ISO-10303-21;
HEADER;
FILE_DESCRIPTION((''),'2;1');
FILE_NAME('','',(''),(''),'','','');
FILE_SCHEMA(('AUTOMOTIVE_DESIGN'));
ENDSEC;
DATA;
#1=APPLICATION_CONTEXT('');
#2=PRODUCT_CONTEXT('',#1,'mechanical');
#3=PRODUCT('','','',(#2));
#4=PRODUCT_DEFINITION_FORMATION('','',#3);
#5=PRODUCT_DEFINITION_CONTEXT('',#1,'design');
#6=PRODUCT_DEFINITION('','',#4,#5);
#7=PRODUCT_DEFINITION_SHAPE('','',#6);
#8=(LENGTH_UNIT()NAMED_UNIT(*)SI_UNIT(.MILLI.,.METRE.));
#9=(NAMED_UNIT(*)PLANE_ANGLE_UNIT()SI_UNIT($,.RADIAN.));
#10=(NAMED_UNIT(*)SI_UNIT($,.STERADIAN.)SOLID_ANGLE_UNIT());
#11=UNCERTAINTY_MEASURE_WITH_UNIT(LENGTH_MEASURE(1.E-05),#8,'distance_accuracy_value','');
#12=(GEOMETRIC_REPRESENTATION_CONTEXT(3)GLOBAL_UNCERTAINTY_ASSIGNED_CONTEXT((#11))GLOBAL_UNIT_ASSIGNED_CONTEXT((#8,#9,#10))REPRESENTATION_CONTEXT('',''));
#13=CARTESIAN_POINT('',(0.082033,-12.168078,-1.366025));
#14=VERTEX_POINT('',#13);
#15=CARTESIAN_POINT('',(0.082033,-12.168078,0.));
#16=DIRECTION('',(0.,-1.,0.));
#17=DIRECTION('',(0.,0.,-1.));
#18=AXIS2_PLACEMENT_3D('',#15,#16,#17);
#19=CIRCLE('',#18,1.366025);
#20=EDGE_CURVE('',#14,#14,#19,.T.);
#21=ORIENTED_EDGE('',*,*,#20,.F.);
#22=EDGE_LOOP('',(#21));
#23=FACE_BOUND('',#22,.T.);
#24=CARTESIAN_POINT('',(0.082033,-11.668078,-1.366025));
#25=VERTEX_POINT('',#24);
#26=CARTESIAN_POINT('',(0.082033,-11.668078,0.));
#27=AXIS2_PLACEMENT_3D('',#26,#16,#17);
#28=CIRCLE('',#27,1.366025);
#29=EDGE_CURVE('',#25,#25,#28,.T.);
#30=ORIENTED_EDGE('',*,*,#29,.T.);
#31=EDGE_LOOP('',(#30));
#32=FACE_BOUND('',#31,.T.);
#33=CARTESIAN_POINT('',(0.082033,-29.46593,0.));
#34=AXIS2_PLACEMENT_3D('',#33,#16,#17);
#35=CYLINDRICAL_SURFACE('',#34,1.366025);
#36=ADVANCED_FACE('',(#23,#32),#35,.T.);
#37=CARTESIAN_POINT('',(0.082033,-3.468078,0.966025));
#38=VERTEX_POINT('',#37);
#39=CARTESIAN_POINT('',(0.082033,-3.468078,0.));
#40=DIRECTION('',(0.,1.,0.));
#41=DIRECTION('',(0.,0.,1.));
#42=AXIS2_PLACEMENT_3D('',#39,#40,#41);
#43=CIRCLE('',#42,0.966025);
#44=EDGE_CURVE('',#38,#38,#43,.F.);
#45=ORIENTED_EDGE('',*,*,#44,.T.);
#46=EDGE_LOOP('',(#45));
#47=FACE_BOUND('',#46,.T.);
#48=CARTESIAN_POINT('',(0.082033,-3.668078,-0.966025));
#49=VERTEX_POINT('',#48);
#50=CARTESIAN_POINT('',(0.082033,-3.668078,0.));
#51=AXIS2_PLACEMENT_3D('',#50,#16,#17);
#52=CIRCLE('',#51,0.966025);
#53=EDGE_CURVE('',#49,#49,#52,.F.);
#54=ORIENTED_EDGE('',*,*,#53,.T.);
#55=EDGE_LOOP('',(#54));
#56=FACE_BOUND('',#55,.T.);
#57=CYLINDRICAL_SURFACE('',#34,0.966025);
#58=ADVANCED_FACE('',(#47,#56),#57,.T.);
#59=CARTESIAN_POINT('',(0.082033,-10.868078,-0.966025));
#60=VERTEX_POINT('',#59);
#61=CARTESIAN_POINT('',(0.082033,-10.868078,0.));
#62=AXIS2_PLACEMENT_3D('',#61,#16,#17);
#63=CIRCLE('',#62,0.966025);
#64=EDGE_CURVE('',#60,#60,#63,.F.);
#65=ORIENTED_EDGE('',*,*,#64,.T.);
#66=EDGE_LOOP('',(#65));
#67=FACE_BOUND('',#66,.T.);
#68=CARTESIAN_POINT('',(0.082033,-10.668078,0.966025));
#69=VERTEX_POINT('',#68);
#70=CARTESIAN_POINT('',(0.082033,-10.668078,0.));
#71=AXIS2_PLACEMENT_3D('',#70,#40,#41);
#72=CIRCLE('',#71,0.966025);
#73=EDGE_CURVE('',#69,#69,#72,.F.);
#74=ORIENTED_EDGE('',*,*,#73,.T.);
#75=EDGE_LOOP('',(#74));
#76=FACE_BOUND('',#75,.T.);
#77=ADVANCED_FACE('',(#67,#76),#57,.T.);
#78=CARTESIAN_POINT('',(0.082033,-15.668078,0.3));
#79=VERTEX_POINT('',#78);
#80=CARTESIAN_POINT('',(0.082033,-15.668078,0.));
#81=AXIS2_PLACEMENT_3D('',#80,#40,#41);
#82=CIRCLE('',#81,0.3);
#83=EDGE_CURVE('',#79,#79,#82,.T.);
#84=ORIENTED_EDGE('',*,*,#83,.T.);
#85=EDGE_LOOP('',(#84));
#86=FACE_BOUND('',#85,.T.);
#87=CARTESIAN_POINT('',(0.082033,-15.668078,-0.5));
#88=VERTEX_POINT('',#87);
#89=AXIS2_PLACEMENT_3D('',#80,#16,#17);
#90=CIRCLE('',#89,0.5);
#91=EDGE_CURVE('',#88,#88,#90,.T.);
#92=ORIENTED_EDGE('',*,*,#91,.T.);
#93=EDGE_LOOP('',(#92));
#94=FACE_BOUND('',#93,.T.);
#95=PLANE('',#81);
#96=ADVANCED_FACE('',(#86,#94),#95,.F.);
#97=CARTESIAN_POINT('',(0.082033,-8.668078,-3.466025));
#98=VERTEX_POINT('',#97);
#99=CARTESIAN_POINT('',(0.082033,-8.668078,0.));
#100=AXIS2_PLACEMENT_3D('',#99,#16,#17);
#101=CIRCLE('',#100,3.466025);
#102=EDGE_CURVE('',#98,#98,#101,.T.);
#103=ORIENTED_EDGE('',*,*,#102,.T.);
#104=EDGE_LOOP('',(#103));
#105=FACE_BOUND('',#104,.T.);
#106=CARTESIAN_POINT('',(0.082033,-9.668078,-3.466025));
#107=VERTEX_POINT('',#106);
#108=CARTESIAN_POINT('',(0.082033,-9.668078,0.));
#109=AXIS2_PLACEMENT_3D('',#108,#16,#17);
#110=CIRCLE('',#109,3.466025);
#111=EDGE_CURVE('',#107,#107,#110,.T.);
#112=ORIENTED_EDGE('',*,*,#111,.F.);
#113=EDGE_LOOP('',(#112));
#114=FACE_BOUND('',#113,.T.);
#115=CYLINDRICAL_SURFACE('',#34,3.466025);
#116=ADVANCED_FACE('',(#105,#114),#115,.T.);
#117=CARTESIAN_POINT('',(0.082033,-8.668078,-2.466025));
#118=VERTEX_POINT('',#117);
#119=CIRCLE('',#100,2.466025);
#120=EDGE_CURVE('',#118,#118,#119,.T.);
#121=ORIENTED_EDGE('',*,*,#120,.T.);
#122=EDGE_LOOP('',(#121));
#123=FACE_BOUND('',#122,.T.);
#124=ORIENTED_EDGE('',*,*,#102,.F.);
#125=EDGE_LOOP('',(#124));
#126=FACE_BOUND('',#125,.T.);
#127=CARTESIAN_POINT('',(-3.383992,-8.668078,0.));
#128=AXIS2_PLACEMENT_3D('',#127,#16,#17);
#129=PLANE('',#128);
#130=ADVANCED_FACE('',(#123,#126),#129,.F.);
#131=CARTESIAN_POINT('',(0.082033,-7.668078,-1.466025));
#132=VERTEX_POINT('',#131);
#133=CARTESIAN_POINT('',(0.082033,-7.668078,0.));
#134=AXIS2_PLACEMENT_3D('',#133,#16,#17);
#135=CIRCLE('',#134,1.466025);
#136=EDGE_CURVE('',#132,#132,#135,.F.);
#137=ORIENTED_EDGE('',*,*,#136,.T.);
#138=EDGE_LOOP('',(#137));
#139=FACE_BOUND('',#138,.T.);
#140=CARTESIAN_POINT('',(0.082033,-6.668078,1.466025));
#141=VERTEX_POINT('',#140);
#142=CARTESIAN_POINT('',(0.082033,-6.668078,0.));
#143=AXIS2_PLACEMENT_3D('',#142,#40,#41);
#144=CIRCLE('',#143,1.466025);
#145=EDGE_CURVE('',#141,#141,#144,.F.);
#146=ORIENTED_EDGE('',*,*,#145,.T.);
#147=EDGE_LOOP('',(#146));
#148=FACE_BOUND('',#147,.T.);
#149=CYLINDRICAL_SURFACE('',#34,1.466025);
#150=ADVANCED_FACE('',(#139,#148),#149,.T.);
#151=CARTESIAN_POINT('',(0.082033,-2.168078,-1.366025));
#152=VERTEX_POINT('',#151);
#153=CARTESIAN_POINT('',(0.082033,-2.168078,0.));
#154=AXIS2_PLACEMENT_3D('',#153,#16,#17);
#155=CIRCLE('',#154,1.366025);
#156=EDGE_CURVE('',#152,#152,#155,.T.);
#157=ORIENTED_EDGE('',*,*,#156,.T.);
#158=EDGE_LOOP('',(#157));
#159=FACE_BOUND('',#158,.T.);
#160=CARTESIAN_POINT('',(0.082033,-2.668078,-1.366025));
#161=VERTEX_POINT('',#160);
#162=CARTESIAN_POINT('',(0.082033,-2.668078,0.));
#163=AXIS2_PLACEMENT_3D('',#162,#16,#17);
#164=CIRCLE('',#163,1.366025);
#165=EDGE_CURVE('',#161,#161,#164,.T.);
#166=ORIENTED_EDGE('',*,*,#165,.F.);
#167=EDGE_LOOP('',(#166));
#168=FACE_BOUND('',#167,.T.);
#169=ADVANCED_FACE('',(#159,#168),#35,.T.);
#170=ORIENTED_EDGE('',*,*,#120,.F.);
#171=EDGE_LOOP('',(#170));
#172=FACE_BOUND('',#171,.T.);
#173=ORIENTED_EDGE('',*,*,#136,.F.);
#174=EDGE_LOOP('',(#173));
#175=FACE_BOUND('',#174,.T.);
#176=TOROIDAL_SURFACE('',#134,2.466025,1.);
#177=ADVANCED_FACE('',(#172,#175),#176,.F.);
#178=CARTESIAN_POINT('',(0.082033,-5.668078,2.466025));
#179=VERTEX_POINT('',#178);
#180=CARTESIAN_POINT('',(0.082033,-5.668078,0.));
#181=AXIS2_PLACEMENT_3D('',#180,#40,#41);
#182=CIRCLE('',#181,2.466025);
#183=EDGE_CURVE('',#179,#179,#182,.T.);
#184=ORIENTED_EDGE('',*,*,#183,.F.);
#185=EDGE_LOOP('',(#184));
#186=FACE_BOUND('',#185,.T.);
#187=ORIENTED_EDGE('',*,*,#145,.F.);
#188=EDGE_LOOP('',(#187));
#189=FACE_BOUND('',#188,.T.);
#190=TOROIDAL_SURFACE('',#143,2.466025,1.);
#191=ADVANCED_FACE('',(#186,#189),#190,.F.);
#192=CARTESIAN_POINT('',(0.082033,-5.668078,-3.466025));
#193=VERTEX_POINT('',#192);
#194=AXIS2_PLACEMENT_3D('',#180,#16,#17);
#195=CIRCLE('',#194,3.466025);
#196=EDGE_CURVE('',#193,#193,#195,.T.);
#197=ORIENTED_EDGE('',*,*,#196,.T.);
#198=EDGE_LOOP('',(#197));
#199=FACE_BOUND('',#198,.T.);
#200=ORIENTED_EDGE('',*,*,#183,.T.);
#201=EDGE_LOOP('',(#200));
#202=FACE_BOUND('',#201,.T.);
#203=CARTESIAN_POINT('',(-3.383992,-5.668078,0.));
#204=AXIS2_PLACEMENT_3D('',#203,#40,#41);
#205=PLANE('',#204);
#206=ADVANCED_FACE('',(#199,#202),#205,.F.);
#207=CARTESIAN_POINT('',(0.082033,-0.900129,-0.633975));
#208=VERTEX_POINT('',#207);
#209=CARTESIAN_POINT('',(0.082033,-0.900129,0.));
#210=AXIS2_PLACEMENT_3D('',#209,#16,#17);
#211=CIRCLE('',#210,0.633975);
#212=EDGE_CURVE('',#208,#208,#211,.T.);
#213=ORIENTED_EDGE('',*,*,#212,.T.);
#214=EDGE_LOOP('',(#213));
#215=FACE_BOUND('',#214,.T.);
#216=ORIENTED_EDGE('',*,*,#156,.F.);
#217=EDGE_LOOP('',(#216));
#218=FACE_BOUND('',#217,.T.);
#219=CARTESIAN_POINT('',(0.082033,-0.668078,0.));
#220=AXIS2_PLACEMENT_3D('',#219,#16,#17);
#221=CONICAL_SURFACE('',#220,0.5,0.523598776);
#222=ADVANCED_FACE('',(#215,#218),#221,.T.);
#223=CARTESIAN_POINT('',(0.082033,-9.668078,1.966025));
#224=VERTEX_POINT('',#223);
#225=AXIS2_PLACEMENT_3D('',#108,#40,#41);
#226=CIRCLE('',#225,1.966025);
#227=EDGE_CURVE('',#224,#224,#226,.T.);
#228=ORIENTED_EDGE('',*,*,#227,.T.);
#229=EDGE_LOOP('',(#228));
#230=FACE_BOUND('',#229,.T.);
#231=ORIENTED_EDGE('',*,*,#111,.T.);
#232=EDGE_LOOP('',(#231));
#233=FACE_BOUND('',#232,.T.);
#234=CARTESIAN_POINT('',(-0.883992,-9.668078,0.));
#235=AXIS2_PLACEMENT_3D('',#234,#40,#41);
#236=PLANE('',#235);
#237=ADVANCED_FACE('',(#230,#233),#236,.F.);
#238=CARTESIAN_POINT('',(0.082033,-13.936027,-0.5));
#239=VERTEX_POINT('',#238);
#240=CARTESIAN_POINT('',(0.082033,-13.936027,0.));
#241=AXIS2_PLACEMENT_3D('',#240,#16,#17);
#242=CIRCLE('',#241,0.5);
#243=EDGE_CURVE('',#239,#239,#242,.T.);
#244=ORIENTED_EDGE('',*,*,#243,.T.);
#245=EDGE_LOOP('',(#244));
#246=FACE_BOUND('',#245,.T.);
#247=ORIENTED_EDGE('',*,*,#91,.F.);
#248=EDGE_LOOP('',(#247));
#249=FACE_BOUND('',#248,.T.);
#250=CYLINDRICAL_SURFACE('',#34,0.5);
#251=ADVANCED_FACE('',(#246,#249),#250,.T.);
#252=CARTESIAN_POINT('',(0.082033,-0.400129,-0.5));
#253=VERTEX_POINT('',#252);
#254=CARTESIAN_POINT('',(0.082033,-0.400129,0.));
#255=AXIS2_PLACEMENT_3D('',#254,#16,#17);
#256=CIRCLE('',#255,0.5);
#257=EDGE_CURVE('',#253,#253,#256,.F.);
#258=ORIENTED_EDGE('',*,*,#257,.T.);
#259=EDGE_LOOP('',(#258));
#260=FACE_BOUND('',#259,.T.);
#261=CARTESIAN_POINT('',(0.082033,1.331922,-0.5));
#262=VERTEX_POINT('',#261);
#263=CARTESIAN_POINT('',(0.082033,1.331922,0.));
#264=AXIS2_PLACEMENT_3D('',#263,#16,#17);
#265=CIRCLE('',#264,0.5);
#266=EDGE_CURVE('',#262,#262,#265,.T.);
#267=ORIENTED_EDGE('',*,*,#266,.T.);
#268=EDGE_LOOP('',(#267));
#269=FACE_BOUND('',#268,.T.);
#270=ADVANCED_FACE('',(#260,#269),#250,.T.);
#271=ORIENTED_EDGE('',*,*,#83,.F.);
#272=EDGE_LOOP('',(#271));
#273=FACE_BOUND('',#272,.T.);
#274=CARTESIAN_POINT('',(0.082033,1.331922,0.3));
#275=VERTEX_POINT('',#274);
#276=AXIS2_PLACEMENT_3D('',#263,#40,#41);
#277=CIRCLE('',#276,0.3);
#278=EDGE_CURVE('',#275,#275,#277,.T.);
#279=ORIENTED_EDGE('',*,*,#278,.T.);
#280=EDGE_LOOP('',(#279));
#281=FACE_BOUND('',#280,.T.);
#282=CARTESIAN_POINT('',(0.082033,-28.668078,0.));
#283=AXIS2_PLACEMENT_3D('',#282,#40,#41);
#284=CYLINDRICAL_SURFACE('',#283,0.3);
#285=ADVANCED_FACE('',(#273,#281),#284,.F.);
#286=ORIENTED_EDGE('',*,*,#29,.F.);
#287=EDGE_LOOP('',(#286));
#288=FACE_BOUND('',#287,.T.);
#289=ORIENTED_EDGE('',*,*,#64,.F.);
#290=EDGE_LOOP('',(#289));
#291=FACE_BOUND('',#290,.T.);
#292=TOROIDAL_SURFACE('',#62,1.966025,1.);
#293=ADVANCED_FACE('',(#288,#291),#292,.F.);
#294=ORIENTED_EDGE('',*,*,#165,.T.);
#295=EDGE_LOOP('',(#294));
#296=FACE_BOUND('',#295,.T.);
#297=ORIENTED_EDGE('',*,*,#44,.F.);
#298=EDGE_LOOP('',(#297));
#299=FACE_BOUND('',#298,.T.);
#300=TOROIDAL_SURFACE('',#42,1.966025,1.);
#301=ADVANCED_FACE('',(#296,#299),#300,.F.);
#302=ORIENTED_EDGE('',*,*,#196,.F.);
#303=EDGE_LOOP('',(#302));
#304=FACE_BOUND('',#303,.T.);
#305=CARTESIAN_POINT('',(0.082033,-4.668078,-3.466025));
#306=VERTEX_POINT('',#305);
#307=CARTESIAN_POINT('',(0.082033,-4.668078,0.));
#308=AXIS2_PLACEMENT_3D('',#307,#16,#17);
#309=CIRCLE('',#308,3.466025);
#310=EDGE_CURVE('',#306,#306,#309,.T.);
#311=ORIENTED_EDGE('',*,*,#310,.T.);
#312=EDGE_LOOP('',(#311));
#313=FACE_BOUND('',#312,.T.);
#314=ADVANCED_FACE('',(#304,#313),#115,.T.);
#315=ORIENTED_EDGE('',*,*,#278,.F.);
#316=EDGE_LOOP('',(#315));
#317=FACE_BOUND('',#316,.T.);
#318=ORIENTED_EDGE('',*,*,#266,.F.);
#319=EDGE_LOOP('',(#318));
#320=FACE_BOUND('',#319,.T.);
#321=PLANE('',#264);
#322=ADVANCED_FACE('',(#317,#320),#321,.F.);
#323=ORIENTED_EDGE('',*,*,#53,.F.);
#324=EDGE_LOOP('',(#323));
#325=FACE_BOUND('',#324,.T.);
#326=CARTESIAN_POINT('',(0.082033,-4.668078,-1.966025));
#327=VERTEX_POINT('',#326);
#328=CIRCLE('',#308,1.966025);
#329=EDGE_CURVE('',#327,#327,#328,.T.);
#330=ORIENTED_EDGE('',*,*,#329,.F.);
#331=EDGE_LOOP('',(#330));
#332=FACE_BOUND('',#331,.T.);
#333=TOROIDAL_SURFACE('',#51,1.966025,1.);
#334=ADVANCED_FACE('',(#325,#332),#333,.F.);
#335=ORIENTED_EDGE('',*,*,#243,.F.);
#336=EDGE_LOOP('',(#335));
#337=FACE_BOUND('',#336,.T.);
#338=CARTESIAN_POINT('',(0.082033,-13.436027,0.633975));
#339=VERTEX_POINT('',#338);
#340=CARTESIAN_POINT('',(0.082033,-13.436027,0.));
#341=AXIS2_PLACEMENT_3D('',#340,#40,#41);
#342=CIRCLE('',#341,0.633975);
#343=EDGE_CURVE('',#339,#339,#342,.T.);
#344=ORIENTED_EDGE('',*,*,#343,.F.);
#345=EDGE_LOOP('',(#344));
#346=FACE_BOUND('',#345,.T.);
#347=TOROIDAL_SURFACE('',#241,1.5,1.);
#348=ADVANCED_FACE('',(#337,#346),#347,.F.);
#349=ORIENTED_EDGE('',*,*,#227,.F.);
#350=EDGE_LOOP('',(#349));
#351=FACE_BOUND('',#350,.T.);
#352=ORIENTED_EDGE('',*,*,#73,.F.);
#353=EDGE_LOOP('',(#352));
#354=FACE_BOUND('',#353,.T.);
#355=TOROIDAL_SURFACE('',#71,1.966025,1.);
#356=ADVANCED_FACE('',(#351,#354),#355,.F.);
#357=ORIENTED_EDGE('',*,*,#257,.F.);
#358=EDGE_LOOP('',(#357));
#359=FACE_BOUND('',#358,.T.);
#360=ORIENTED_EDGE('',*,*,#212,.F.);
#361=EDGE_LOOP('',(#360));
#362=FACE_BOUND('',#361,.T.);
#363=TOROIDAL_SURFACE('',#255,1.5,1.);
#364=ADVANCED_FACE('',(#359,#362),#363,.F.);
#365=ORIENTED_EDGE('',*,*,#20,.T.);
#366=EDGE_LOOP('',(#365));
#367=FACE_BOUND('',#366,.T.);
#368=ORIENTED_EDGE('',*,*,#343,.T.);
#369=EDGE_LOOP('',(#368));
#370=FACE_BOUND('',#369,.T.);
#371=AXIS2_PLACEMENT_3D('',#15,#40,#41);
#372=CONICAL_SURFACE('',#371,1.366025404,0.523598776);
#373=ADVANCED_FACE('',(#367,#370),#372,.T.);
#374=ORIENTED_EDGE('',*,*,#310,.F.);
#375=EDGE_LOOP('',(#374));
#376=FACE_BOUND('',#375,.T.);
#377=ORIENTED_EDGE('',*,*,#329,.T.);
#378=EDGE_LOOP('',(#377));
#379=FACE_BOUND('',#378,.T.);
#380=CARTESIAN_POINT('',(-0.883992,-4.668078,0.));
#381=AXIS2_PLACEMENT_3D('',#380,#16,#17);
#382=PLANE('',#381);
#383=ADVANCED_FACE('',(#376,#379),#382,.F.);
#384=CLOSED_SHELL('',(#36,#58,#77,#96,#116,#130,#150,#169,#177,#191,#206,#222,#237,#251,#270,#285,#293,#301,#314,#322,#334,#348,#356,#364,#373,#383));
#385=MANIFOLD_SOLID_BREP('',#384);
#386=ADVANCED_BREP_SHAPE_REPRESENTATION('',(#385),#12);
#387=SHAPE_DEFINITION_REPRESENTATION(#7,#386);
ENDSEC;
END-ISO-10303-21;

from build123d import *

# Parameters (mm, degrees)
REDONDEO1_R           = 1
CROQUIS2_R            = 0.3
CORTAR_EXTRUIR1_DEPTH = 30


with BuildPart() as part:
    # Croquis1 → Revolución1 (revolve)
    with BuildSketch(Plane.XY, mode=Mode.PRIVATE) as revoluci_n1_sk:
        Polygon((0.0820331634814839, 1.3319217282682125), (-0.4179668365185161, 1.3319217282682125), (-0.41796683651851585, -0.6680782717317876), (-1.2839922403029567, -2.1680782717317877), (-1.2839922403029567, -2.6680782717317877), (-0.8839922403029566, -2.6680782717317877), (-0.8839922403029565, -4.668078271731787), (-3.3839922403029563, -4.668078271731787), (-3.3839922403029568, -5.668078271731787), (-1.383992240302957, -5.668078271731787), (-1.383992240302957, -8.668078271731785), (-3.3839922403029568, -8.668078271731785), (-3.3839922403029563, -9.668078271731787), (-0.8839922403029565, -9.668078271731785), (-0.8839922403029566, -11.668078271731785), (-1.2839922403029567, -11.668078271731785), (-1.2839922403029567, -12.168078271731785), (-0.41796683651851585, -13.668078271731785), (-0.4179668365185161, -15.668078271731785), (0.0820331634814839, -15.668078271731785), align=None)
    revolve(revoluci_n1_sk.sketch.rotate(Axis((0.08203316348148769, -29.465929864768743, 0), (0, 1, 0)), 270), axis=Axis((0.08203316348148769, -29.465929864768743, 0), (0, 1, 0)))

    # Redondeo1
    # the kernel refuses this fillet: 1 mm, written as the material it adds along each edge
    with BuildSketch(Plane(origin=(0.08203316348148769, -9.668078271731783, 0), x_dir=(2.2e-16, 0, -1), z_dir=(1, 0, 2.2e-16))) as redondeo1_piece_1:
        with BuildLine():
            CenterArc((0.9660254037844442 + REDONDEO1_R, -REDONDEO1_R), REDONDEO1_R, 90, 89.9999999999998)
            Line((0.9660254037844442, -REDONDEO1_R), (0.9660254037844442 - REDONDEO1_R * 0.02, -REDONDEO1_R))
            Line((0.9660254037844442 - REDONDEO1_R * 0.02, -REDONDEO1_R), (0.9660254037844442 - REDONDEO1_R * 0.02, REDONDEO1_R * 0.02))
            Line((0.9660254037844442 - REDONDEO1_R * 0.02, REDONDEO1_R * 0.02), (0.9660254037844442 + REDONDEO1_R, REDONDEO1_R * 0.02))
            Line((0.9660254037844442 + REDONDEO1_R, REDONDEO1_R * 0.02), (0.9660254037844442 + REDONDEO1_R, -3.55e-15))
        make_face()
    revolve(axis=Axis((0.08203316348148769, -9.668078271731783, 0), (0, 1, 0)))
    with BuildSketch(Plane(origin=(0.08203316348148769, -11.668078271731783, 0), x_dir=(2.2e-16, 0, -1), z_dir=(1, 0, 2.2e-16))) as redondeo1_piece_2:
        with BuildLine():
            CenterArc((1.9660254037844442, 0.7999999999999989), REDONDEO1_R, 180, 53.130102354155895)
            Line((1.3660254037844437, 0), (1.3540254037844437, -0.01600000000000001))
            ThreePointArc((1.3540254037844437, -0.01600000000000001), (1.166025403784444, -0.01999999999999957), (0.9660254037844443, -0.01999999999999957))
            Line((0.9660254037844443, -0.01999999999999957), (0.9460254037844443, 0))
            Line((0.9460254037844443, 0), (0.9460254037844442, 0.7999999999999989))
            Line((0.9460254037844442, 0.7999999999999989), (0.9660254037844442, 0.7999999999999989))
        make_face()
    revolve(axis=Axis((0.08203316348148769, -11.668078271731783, 0), (0, 1, 0)))
    with BuildSketch(Plane(origin=(0.08203316348148769, -13.668078271731785, 0), x_dir=(2.2e-16, 0, -1), z_dir=(1, 0, 2.2e-16))) as redondeo1_piece_3:
        with BuildLine():
            CenterArc((0.5000000000000036 + REDONDEO1_R, -REDONDEO1_R * 0.267949192431), REDONDEO1_R, 149.99999999999991, 29.99999999999997)
            Line((0.5000000000000024, -REDONDEO1_R * 0.267949192431), (0.5000000000000036 - REDONDEO1_R * 0.02, -REDONDEO1_R * 0.267949192431))
            Line((0.5000000000000036 - REDONDEO1_R * 0.02, -REDONDEO1_R * 0.267949192431), (0.5000000000000036 - REDONDEO1_R * 0.02, REDONDEO1_R * 0.00535898384862))
            Line((0.5000000000000036 - REDONDEO1_R * 0.02, REDONDEO1_R * 0.00535898384862), (0.5000000000000036 + REDONDEO1_R * 0.11665408814, REDONDEO1_R * 0.242050807569))
            Line((0.5000000000000036 + REDONDEO1_R * 0.11665408814, REDONDEO1_R * 0.242050807569), (0.5000000000000036 + REDONDEO1_R * 0.133974596216, REDONDEO1_R * 0.232050807569))
        make_face()
    revolve(axis=Axis((0.08203316348148769, -13.668078271731785, 0), (0, 1, 0)))
    with BuildSketch(Plane(origin=(0.08203316348148769, -0.6680782717317868, 0), x_dir=(2.2e-16, 0, -1), z_dir=(1, 0, 2.2e-16))) as redondeo1_piece_4:
        with BuildLine():
            CenterArc((0.5000000000000036 + REDONDEO1_R, REDONDEO1_R * 0.267949192431), REDONDEO1_R, 180, 30.000000000000057)
            Line((0.5000000000000036 + REDONDEO1_R * 0.133974596216, -REDONDEO1_R * 0.232050807569), (0.5000000000000036 + REDONDEO1_R * 0.11665408814, -REDONDEO1_R * 0.242050807569))
            Line((0.5000000000000036 + REDONDEO1_R * 0.11665408814, -REDONDEO1_R * 0.242050807569), (0.5000000000000036 - REDONDEO1_R * 0.02, -REDONDEO1_R * 0.00535898384862))
            Line((0.5000000000000036 - REDONDEO1_R * 0.02, -REDONDEO1_R * 0.00535898384862), (0.5000000000000036 - REDONDEO1_R * 0.02, REDONDEO1_R * 0.267949192431))
            Line((0.5000000000000036 - REDONDEO1_R * 0.02, REDONDEO1_R * 0.267949192431), (0.5000000000000038, REDONDEO1_R * 0.267949192431))
        make_face()
    revolve(axis=Axis((0.08203316348148769, -0.6680782717317868, 0), (0, 1, 0)))
    with BuildSketch(Plane(origin=(0.08203316348148769, -2.668078271731787, 0), x_dir=(2.2e-16, 0, -1), z_dir=(1, 0, 2.2e-16))) as redondeo1_piece_5:
        with BuildLine():
            CenterArc((1.9660254037844442, -0.7999999999999998), REDONDEO1_R, 126.86989764584403, 53.130102354155966)
            Line((0.9660254037844442, -0.7999999999999998), (0.9460254037844442, -0.7999999999999998))
            Line((0.9460254037844442, -0.7999999999999998), (0.9460254037844443, 0))
            Line((0.9460254037844443, 0), (0.9660254037844443, 0.02000000000000002))
            ThreePointArc((0.9660254037844443, 0.02000000000000002), (1.1660254037844442, 0.02000000000000002), (1.3540254037844441, 0.01600000000000001))
            Line((1.3540254037844441, 0.01600000000000001), (1.3660254037844441, 0))
        make_face()
    revolve(axis=Axis((0.08203316348148769, -2.668078271731787, 0), (0, 1, 0)))
    with BuildSketch(Plane(origin=(0.08203316348148769, -4.668078271731787, 0), x_dir=(2.2e-16, 0, -1), z_dir=(1, 0, 2.2e-16))) as redondeo1_piece_6:
        with BuildLine():
            CenterArc((0.9660254037844442 + REDONDEO1_R, REDONDEO1_R), REDONDEO1_R, 180, 90)
            Line((0.9660254037844442 + REDONDEO1_R, 0), (0.9660254037844442 + REDONDEO1_R, -REDONDEO1_R * 0.02))
            Line((0.9660254037844442 + REDONDEO1_R, -REDONDEO1_R * 0.02), (0.9660254037844442 - REDONDEO1_R * 0.02, -REDONDEO1_R * 0.02))
            Line((0.9660254037844442 - REDONDEO1_R * 0.02, -REDONDEO1_R * 0.02), (0.9660254037844442 - REDONDEO1_R * 0.02, REDONDEO1_R))
            Line((0.9660254037844442 - REDONDEO1_R * 0.02, REDONDEO1_R), (0.9660254037844442, REDONDEO1_R))
        make_face()
    revolve(axis=Axis((0.08203316348148769, -4.668078271731787, 0), (0, 1, 0)))
    with BuildSketch(Plane(origin=(0.08203316348148769, -5.668078271731787, 0), x_dir=(2.2e-16, 0, -1), z_dir=(1, 0, 2.2e-16))) as redondeo1_piece_7:
        with BuildLine():
            CenterArc((1.4660254037844447 + REDONDEO1_R, -REDONDEO1_R), REDONDEO1_R, 90, 90)
            Line((1.4660254037844447, -REDONDEO1_R), (1.4660254037844447 - REDONDEO1_R * 0.02, -REDONDEO1_R))
            Line((1.4660254037844447 - REDONDEO1_R * 0.02, -REDONDEO1_R), (1.4660254037844447 - REDONDEO1_R * 0.02, REDONDEO1_R * 0.02))
            Line((1.4660254037844447 - REDONDEO1_R * 0.02, REDONDEO1_R * 0.02), (1.4660254037844447 + REDONDEO1_R, REDONDEO1_R * 0.02))
            Line((1.4660254037844447 + REDONDEO1_R, REDONDEO1_R * 0.02), (1.4660254037844447 + REDONDEO1_R, 0))
        make_face()
    revolve(axis=Axis((0.08203316348148769, -5.668078271731787, 0), (0, 1, 0)))
    with BuildSketch(Plane(origin=(0.08203316348148769, -8.668078271731783, 0), x_dir=(2.2e-16, 0, -1), z_dir=(1, 0, 2.2e-16))) as redondeo1_piece_8:
        with BuildLine():
            CenterArc((1.4660254037844447 + REDONDEO1_R, REDONDEO1_R), REDONDEO1_R, 180, 90)
            Line((1.4660254037844447 + REDONDEO1_R, 0), (1.4660254037844447 + REDONDEO1_R, -REDONDEO1_R * 0.02))
            Line((1.4660254037844447 + REDONDEO1_R, -REDONDEO1_R * 0.02), (1.4660254037844447 - REDONDEO1_R * 0.02, -REDONDEO1_R * 0.02))
            Line((1.4660254037844447 - REDONDEO1_R * 0.02, -REDONDEO1_R * 0.02), (1.4660254037844447 - REDONDEO1_R * 0.02, REDONDEO1_R))
            Line((1.4660254037844447 - REDONDEO1_R * 0.02, REDONDEO1_R), (1.4660254037844447, REDONDEO1_R))
        make_face()
    revolve(axis=Axis((0.08203316348148769, -8.668078271731783, 0), (0, 1, 0)))

    # Croquis2 → Cortar-Extruir1 (cut)
    with BuildSketch(Plane(origin=(0, 1.3319217282682125, 0), x_dir=(1, 0, 0), z_dir=(0, 1, 0))):
        with Locations(Location((0.08203316348148769, 0, 0), (0, 0, 270))):
            Circle(CROQUIS2_R)
    extrude(amount=-CORTAR_EXTRUIR1_DEPTH, mode=Mode.SUBTRACT)


solid = part.part
